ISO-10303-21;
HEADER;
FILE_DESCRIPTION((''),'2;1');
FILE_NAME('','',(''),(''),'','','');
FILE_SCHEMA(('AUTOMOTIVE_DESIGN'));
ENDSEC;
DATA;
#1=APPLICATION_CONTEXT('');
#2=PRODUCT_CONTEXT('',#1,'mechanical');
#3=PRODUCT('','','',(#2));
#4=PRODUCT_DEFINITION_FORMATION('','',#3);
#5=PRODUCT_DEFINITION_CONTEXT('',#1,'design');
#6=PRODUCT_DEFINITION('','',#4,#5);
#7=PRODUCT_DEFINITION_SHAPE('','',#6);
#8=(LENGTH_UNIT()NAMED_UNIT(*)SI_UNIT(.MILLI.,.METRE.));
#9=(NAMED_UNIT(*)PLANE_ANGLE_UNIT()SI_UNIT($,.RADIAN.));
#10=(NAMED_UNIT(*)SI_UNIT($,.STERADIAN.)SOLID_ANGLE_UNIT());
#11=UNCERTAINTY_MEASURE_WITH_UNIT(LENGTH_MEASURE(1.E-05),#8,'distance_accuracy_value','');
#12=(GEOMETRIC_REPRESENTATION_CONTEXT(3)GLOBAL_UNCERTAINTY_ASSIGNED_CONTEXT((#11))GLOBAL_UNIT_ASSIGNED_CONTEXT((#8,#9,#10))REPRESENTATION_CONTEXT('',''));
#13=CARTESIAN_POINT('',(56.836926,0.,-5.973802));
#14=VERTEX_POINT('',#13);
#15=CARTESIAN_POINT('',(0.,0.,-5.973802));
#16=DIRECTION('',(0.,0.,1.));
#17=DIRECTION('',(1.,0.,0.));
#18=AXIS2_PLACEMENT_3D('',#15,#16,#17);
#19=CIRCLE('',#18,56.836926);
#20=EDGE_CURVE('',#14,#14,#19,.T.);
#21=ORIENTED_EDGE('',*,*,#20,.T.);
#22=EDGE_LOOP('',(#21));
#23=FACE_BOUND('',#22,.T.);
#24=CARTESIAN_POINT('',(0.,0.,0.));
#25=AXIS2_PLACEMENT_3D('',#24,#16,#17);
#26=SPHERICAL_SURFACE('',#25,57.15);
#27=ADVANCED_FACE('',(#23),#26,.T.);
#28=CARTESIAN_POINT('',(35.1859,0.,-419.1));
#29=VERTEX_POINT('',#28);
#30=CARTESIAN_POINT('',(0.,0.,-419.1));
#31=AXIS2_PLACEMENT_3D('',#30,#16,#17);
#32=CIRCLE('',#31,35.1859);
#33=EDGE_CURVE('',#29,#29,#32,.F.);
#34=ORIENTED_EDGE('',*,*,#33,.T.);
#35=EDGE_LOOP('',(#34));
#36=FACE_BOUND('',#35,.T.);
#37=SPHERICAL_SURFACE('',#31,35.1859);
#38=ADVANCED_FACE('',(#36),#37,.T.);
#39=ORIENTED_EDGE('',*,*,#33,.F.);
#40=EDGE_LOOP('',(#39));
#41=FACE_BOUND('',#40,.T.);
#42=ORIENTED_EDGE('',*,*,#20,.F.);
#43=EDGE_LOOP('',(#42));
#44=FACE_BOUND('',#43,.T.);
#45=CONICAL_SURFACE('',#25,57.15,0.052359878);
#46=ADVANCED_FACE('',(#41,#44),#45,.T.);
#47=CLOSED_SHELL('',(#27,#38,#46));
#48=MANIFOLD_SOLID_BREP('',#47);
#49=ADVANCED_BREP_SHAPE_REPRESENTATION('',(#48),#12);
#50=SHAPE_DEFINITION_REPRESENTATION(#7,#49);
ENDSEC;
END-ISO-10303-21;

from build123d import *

# Parameters (mm, degrees)
SKETCH1_R           = 57.15
BOSS_EXTRUDE1_DEPTH = 419.1
BOSS_EXTRUDE1_DRAFT = -3


# Read off the part's stored shape, not the designer's step: Revolve2
with BuildPart() as part:
    # Sketch1 → Boss-Extrude1 (with draft: the straight prism first)
    with BuildSketch(Plane.XY):
        Circle(SKETCH1_R)
    extrude(amount=-BOSS_EXTRUDE1_DEPTH)
    # Boss-Extrude1: the draft: its side faces are tilted about the plane it starts from
    boss_extrude1_sides = [part.faces().sort_by_distance(p)[0] for p in [
        (-57.15, 0, -209.55),
    ]]
    draft(boss_extrude1_sides, Plane.XY, BOSS_EXTRUDE1_DRAFT)

    # Sketch4 → Revolve1 (revolve)
    with BuildSketch(Plane(origin=(0, 0, 0), x_dir=(0, 0, -1), z_dir=(1, 0, 0))):
        with BuildLine():
            Line((419.1, 35.185899702), (419.1, -35.185899702))
            ThreePointArc((419.1, -35.185899702), (454.285899702, 0), (419.1, 35.185899702))
        make_face()
    revolve(axis=Axis((0, 35.185899702, -419.1), (0, -1, 0)))

    # Revolve2 outline → Revolve2 (revolve)
    with BuildSketch(Plane.XZ):
        with BuildLine():
            Line((56.836926314, 0), (56.836926314, -5.973801733))
            ThreePointArc((56.836926314, -5.973801733), (42.470726795, 38.240814132), (0, 57.15))
            Line((0, 57.15), (0, 0))
            Line((0, 0), (56.836926314, 0))
        make_face()
    revolve(axis=Axis((0, 0, 0), (0, 0, 1)))


solid = part.part
